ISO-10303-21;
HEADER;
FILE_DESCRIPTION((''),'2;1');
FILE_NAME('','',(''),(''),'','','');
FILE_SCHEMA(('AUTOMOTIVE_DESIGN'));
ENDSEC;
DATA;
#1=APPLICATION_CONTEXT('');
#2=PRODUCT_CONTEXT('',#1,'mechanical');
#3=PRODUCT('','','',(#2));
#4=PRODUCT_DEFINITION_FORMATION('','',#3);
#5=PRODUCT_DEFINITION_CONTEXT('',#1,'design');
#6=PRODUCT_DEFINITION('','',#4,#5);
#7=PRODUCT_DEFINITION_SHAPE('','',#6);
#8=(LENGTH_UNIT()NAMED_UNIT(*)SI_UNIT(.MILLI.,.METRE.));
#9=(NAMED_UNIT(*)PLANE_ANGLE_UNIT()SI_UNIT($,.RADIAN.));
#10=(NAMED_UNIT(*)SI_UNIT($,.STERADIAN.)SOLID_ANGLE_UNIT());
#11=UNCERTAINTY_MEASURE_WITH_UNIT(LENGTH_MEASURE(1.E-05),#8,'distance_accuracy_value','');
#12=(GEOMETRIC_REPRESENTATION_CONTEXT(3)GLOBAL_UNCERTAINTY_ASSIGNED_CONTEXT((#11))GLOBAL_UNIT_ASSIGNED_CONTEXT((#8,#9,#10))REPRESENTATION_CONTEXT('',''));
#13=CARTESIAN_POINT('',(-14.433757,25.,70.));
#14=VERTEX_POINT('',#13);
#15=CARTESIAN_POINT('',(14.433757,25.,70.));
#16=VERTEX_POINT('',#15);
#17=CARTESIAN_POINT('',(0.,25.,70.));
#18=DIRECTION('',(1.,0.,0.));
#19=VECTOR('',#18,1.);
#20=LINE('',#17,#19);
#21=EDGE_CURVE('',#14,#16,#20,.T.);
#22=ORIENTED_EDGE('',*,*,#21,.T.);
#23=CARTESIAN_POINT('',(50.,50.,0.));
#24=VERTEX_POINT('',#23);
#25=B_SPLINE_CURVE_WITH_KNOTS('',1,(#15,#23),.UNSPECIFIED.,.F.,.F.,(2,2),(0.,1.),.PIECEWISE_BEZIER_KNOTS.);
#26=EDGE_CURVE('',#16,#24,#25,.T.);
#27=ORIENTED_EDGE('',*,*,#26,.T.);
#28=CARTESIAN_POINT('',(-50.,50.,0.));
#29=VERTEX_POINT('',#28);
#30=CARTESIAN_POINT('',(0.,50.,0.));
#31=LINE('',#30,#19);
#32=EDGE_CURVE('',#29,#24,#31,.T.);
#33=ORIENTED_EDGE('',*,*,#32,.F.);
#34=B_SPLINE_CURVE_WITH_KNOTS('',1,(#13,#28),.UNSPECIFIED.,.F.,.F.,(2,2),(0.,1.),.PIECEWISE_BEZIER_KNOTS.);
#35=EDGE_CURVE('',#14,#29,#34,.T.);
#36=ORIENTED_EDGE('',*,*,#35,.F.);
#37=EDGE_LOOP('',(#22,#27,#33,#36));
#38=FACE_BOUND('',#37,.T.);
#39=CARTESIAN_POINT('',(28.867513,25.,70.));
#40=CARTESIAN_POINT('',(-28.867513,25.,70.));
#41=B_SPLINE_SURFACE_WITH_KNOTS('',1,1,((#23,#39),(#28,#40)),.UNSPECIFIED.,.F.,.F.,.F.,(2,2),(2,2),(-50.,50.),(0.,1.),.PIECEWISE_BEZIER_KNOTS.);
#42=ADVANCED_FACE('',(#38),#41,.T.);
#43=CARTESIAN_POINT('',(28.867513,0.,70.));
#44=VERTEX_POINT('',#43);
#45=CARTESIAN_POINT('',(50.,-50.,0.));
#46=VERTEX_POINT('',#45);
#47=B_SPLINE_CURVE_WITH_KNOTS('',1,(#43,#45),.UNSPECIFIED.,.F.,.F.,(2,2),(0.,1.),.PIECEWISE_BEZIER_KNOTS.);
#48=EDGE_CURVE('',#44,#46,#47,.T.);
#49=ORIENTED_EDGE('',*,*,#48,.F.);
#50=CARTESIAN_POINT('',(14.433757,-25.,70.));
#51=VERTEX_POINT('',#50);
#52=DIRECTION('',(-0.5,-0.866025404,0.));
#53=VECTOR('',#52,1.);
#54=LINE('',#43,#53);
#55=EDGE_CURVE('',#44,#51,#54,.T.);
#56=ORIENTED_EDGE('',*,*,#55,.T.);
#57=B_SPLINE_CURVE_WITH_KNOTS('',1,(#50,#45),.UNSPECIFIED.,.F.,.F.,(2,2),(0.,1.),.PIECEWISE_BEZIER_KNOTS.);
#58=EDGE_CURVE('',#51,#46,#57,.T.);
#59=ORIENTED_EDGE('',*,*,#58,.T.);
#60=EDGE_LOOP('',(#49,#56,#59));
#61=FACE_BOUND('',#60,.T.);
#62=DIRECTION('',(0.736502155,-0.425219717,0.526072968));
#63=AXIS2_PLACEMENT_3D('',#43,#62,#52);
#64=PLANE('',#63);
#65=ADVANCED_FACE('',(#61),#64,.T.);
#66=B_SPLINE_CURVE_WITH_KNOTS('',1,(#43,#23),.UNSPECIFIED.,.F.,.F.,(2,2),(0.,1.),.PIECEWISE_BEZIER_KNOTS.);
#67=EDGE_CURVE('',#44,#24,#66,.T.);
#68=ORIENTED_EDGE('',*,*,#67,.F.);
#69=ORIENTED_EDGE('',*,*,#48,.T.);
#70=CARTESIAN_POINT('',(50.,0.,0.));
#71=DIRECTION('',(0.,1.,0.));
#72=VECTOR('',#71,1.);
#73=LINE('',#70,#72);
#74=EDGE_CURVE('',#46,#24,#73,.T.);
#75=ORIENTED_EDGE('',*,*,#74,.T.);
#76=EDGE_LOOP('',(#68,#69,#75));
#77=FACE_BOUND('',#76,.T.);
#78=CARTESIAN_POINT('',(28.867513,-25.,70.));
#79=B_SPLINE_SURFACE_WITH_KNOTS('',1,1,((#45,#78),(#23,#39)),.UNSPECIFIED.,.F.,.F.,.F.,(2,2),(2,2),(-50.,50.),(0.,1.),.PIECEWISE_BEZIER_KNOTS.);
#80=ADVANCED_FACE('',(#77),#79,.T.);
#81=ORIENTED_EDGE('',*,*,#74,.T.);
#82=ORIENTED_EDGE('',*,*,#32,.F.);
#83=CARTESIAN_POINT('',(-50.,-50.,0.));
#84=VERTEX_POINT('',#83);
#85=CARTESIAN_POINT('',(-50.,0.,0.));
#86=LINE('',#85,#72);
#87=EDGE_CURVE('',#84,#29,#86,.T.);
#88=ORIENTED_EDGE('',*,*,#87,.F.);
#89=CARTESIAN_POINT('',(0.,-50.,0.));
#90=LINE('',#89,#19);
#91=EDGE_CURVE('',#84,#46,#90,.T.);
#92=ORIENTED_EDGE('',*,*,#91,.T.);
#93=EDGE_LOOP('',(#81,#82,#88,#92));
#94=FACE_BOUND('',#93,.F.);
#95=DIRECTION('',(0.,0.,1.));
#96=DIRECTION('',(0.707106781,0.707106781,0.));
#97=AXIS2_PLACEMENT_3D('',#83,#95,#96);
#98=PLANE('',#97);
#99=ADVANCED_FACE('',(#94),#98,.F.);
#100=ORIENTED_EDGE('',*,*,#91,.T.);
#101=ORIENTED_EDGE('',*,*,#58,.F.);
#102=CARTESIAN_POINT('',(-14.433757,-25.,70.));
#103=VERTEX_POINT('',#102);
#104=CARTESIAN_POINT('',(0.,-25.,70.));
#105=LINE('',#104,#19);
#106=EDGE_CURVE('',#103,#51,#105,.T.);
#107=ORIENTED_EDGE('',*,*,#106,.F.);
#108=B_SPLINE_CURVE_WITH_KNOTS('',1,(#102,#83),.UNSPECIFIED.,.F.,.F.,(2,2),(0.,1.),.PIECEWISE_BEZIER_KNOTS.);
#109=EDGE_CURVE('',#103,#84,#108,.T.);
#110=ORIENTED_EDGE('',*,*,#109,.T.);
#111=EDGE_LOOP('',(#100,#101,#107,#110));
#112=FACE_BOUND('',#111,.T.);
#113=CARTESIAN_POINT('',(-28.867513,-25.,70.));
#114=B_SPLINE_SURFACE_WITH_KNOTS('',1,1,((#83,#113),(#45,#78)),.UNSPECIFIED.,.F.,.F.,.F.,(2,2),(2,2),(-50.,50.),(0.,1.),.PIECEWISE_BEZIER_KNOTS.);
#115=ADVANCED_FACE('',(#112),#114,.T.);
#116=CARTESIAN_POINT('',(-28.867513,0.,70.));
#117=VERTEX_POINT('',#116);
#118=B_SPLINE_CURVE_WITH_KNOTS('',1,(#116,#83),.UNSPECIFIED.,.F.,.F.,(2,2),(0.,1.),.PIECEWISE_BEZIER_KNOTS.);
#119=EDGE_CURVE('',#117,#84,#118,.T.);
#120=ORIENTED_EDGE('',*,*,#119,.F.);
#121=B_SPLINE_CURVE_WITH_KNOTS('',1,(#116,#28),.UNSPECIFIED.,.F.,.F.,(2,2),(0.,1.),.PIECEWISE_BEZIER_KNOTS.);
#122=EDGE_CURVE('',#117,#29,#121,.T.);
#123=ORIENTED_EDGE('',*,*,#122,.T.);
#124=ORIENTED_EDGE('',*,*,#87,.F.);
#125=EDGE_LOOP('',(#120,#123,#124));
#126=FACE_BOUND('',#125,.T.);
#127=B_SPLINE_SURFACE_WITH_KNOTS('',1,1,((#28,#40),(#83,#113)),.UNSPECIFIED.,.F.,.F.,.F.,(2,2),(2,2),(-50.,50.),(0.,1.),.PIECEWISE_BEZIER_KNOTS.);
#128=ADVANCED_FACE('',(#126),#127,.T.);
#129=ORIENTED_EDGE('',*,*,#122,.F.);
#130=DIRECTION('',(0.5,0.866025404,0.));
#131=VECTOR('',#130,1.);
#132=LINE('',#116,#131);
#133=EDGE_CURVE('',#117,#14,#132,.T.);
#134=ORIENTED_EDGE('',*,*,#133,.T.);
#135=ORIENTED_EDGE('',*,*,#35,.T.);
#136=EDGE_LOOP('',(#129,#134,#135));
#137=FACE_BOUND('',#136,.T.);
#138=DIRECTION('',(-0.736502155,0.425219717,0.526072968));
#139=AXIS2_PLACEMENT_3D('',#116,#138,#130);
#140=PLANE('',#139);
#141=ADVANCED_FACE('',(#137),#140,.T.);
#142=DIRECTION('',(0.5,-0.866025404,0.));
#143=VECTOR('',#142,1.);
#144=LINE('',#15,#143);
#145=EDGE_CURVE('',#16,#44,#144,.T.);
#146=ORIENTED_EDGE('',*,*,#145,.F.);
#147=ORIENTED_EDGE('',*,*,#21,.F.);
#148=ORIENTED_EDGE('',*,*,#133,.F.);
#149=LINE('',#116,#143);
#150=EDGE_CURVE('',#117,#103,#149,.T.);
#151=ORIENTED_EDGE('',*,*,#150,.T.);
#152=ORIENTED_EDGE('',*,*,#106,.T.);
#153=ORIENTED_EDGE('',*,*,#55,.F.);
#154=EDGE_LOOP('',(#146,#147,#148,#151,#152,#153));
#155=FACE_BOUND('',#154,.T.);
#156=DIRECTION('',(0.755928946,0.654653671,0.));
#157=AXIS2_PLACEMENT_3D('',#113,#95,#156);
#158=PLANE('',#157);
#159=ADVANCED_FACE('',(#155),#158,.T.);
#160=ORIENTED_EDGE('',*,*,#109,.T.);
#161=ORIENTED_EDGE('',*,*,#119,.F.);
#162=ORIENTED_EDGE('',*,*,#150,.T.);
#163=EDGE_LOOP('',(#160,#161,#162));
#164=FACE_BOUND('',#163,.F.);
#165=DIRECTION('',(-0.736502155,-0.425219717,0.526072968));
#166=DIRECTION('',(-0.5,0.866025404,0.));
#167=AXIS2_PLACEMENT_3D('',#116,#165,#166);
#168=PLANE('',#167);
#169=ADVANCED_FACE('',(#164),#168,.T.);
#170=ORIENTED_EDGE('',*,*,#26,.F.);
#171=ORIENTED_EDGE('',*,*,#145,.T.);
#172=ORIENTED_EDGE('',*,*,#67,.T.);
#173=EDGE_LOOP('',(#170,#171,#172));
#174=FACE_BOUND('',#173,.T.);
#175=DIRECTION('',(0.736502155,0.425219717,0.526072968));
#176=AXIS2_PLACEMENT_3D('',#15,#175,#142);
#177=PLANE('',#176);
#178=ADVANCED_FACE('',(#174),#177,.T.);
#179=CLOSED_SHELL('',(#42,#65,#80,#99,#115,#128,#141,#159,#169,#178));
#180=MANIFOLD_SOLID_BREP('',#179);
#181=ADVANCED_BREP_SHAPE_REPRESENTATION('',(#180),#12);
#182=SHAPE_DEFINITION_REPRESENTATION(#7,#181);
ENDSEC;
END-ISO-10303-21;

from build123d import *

# Parameters (mm, degrees)
F0_W = 100
F0_H = 100
F3_W = 57.735026919
F3_H = 50


# Not quite as in the source:
# - a feature of the source that left no trace in its solid (it failed there, or was rolled back) is left out
# - a pattern or mirror of a feature is missing from the dataset's text; its kind, count and spacing are read off the source's solid


with BuildPart() as f4:
    # F0 (on Top) → F4 section 0
    with BuildSketch(Plane.XY):
        Rectangle(F0_W, F0_H)
    # F3 (on offset) → F4 section 1
    with BuildSketch(Plane.XY.offset(70)):
        Rectangle(F3_W, F3_H)
    loft()

    # F2 (on offset) → F6 section 0
    with BuildSketch(Plane.XY.offset(70), mode=Mode.PRIVATE) as f6_s0:
        Polygon((28.8675134595, -25), (28.8675134595, 0), (14.4337567297, -25), align=None)
    f6 = loft([f6_s0.sketch, Vertex(50, -50, 0)], mode=Mode.SUBTRACT)

    # F6_copies: F6 across plane
    add(f6.mirror(Plane(origin=(0, 0, 0), x_dir=(0, 0, -1), z_dir=(-1, 0, 0))), mode=Mode.SUBTRACT)

    # F2 (on offset) → F7 section 0
    with BuildSketch(Plane.XY.offset(70), mode=Mode.PRIVATE) as f7_s0:
        Polygon((28.8675134595, 25), (14.4337567297, 25), (28.8675134595, 0), align=None)
    loft([f7_s0.sketch, Vertex(50, 50, 0)], mode=Mode.SUBTRACT)

    # F2 (on offset) → F8 section 0
    with BuildSketch(Plane.XY.offset(70), mode=Mode.PRIVATE) as f8_s0:
        Polygon((-28.8675134595, 0), (-14.4337567297, 25), (-28.8675134595, 25), align=None)
    loft([f8_s0.sketch, Vertex(-50, 50, 0)], mode=Mode.SUBTRACT)


solid = f4.part
